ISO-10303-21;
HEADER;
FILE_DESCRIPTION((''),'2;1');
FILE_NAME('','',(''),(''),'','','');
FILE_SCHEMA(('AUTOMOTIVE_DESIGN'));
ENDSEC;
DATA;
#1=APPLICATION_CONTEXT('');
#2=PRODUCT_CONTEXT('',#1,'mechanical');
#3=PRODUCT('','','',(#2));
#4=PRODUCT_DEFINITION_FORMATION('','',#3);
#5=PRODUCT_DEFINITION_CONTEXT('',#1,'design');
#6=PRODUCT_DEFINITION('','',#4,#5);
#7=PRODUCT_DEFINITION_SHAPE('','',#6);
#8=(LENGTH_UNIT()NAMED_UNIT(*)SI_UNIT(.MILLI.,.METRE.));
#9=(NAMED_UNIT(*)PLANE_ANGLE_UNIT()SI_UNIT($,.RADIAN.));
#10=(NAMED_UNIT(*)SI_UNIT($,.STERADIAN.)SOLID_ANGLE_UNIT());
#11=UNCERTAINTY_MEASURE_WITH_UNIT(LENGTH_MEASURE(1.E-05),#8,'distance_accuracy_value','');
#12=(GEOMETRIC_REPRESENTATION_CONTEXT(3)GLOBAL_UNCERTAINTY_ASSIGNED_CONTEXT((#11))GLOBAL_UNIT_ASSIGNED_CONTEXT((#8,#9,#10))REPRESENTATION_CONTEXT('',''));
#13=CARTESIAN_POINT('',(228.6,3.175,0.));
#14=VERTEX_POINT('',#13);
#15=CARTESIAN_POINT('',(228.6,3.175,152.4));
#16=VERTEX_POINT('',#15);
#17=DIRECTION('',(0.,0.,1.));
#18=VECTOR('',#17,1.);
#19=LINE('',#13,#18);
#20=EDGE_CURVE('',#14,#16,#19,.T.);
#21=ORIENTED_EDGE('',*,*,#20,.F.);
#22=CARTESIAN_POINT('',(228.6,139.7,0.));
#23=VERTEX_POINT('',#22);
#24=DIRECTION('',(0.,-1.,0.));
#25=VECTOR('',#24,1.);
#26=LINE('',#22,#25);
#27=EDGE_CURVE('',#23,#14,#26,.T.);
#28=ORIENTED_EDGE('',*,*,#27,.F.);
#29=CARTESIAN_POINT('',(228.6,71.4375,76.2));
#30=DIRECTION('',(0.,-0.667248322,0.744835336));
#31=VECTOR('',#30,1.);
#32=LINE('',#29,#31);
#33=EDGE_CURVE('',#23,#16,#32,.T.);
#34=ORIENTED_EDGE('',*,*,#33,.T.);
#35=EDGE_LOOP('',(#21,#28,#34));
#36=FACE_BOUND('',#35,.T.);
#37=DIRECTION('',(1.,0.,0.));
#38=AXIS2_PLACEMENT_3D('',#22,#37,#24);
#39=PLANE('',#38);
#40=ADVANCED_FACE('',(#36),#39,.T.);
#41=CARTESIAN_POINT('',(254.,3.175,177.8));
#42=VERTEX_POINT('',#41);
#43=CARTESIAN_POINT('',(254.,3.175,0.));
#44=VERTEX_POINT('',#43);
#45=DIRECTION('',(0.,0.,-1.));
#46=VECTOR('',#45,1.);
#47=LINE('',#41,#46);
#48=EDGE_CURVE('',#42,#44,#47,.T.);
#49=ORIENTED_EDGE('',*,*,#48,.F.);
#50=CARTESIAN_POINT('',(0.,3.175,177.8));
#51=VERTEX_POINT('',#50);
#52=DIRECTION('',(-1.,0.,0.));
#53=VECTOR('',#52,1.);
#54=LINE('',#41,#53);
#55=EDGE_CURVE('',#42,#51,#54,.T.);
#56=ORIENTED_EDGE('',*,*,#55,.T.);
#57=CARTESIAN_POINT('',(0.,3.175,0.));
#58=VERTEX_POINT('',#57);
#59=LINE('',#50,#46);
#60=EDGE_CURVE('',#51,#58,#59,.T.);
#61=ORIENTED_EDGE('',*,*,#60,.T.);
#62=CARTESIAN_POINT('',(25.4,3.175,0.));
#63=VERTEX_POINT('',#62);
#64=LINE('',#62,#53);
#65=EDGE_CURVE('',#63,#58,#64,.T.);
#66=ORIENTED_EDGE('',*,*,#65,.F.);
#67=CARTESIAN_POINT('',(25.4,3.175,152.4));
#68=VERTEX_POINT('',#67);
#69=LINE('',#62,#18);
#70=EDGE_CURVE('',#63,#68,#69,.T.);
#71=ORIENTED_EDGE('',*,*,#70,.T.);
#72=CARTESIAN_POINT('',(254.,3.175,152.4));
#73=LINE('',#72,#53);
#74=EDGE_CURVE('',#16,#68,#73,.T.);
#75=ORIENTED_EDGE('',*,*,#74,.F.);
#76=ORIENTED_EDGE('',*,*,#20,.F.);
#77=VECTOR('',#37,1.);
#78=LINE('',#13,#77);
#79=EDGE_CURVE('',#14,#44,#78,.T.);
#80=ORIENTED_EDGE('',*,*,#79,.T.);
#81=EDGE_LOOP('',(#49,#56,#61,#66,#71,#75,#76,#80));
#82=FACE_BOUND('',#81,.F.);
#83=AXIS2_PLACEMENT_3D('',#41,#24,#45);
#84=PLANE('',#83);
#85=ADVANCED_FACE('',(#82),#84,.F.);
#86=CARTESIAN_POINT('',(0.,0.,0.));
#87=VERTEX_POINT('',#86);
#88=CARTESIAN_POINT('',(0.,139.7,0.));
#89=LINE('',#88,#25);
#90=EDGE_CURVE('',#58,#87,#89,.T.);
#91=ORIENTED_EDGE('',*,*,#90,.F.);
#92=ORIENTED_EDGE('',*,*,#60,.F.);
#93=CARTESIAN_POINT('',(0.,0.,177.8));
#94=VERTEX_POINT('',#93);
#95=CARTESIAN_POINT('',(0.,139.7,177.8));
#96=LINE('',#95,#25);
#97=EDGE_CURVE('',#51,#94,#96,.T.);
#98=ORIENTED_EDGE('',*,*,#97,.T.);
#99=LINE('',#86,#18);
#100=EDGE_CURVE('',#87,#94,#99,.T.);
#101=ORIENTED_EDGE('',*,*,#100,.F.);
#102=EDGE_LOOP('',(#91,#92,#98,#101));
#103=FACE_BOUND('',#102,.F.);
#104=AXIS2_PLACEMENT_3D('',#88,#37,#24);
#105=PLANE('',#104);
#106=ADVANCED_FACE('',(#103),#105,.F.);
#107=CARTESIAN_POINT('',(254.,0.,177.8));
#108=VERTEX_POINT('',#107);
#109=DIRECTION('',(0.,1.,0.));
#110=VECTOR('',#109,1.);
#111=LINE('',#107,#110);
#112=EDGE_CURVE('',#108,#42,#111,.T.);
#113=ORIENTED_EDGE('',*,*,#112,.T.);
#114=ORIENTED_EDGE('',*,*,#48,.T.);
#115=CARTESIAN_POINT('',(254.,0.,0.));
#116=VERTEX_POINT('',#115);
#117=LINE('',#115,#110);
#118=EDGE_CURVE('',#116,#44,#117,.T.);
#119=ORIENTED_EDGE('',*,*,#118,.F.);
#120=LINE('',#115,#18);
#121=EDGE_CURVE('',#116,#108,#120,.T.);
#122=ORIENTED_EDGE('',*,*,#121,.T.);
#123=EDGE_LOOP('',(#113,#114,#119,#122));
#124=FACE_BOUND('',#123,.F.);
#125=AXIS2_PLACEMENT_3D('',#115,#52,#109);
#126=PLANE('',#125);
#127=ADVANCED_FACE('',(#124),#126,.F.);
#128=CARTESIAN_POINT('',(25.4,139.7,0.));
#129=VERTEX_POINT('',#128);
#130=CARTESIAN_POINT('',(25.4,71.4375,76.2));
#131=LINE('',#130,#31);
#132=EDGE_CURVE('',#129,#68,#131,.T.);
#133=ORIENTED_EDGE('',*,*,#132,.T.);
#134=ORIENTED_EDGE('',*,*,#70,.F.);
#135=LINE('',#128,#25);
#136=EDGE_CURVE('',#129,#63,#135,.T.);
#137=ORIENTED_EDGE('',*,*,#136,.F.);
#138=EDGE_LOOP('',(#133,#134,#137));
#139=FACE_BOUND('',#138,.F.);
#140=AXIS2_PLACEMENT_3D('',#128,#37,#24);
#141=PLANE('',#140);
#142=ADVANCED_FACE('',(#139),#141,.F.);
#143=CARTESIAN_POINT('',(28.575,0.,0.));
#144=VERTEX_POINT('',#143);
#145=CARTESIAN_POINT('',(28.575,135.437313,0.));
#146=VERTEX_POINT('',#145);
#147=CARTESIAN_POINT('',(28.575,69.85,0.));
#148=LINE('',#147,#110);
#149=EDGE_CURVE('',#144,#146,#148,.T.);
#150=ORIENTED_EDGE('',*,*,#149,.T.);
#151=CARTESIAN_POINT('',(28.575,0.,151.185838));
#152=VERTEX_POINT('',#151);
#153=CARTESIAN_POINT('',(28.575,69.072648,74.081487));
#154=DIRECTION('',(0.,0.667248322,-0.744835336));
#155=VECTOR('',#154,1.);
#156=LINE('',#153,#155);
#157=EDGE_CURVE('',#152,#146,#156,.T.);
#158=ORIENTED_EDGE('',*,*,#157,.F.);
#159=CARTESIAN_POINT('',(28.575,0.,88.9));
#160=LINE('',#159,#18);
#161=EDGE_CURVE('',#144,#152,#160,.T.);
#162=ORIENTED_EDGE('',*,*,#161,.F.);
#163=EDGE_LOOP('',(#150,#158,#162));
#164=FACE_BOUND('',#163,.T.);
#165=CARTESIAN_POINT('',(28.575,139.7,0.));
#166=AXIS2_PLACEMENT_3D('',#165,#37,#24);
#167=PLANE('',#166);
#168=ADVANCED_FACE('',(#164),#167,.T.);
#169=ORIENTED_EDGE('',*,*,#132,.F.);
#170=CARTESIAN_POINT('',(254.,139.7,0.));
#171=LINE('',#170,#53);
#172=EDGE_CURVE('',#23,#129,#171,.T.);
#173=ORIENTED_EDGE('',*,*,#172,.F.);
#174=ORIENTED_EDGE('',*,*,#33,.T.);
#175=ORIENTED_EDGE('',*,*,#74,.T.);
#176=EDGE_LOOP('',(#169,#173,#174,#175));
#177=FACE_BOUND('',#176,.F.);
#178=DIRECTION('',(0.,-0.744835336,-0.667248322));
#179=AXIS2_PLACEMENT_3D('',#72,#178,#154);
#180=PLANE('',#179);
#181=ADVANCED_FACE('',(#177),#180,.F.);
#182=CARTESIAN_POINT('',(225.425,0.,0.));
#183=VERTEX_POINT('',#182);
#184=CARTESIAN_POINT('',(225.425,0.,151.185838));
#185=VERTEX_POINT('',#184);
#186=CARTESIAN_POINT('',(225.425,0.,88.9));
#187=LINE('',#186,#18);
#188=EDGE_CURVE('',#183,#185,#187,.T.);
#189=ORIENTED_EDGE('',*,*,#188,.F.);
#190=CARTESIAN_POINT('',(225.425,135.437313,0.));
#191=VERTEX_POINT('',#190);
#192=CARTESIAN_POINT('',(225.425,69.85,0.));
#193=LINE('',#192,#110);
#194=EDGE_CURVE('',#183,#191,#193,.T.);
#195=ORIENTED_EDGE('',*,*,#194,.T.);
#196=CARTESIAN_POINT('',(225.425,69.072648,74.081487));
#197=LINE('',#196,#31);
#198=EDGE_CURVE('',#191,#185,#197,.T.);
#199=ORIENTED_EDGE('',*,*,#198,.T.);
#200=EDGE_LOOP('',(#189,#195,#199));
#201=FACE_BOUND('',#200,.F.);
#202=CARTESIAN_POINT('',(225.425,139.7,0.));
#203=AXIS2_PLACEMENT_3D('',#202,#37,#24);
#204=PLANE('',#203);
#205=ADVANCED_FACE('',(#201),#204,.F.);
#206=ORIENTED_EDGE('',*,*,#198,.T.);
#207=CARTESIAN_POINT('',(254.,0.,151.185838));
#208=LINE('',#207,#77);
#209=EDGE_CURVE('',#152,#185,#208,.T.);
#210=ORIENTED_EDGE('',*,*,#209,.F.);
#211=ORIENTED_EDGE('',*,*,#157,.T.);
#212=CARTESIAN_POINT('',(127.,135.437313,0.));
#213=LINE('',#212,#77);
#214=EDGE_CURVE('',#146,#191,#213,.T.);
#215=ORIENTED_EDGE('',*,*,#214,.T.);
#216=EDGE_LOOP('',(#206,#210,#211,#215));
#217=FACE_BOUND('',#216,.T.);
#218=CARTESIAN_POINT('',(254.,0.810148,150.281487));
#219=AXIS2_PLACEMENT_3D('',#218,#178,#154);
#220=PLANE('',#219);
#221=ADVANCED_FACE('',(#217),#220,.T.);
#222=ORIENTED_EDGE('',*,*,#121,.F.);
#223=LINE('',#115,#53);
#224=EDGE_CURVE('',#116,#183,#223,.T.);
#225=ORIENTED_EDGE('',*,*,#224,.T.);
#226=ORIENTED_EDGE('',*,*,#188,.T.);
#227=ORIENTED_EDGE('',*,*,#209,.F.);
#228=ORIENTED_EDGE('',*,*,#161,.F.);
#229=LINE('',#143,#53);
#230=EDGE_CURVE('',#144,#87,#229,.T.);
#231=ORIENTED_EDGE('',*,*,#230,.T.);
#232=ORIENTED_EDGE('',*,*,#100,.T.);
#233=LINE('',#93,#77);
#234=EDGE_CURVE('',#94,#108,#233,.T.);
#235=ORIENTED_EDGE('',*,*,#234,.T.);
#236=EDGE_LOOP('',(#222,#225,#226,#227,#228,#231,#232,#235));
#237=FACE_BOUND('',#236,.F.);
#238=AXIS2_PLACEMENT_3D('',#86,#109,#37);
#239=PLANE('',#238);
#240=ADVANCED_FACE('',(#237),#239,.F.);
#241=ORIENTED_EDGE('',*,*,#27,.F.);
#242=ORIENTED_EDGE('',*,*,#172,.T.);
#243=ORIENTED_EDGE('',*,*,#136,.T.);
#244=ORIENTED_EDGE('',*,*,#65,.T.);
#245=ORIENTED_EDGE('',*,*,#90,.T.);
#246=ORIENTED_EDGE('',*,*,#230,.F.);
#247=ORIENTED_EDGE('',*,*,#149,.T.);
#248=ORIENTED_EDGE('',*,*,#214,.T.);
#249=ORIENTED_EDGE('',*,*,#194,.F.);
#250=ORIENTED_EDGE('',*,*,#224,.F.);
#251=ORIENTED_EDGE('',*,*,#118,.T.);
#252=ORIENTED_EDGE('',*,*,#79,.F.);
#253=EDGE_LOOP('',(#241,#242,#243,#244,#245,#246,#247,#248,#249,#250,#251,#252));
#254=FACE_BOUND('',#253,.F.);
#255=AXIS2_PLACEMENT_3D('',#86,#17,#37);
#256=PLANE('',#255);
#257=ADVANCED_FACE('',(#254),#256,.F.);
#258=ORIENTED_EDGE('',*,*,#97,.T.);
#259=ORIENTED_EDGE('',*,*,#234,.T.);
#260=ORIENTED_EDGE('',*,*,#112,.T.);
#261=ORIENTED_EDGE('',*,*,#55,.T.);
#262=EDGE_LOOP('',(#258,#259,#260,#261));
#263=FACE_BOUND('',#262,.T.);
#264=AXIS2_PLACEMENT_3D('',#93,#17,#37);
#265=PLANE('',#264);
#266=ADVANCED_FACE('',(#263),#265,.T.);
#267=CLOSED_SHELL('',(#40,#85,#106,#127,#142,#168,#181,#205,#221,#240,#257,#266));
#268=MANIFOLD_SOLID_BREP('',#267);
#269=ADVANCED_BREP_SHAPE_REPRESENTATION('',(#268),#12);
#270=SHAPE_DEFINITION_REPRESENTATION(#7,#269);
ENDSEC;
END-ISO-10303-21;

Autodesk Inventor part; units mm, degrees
ref_plane "YZ Plane" through (0, 0, 0) normal (1, 0, 0) x (0, 1, 0)
ref_plane "XZ Plane" through (0, 0, 0) normal (0, 1, 0) x (-1, 0, 0)
ref_plane "XY Plane" through (0, 0, 0) normal (0, 0, 1) x (1, 0, 0)
sketch "Sketch1" plane through (0, 0, 0) normal (0, 0, 1) x (1, 0, 0)
  line L0 (0, 0) -> (254, 0)
  line L1 (254, 0) -> (254, 139.7)
  line L2 (254, 139.7) -> (0, 139.7)
  line L3 (0, 139.7) -> (0, 0)
  dimension "d0" = 254
  dimension "d1" = 139.7
extrude "Extrusion1" add sketch "Sketch1" along normal blind 177.8
sketch "Sketch4" plane through (254, 0, 0) normal (1, 0, 0) x (0, 0, -1)
  line L0 (-177.8, 139.7) -> (-177.8, 0) projected
  line L1 (0, 0) -> (-177.8, 0) projected
  line L2 (0, 139.7) -> (-177.8, 139.7)
  line L3 (-177.8, 139.7) -> (-177.8, 3.175)
  line L4 (-177.8, 3.175) -> (-152.4, 3.175)
  line L5 (-152.4, 3.175) -> (0, 139.7)
  dimension "d10" = 3.175
  dimension "d11" = 25.4
extrude "Extrusion3" cut sketch "Sketch4" against normal through all
sketch "Sketch5" plane through (0, 0, 0) normal (0, 0, -1) x (-1, 0, 0)
  line L0 (0, 0) -> (-254, 0) projected
  line L1 (0, 139.7) -> (0, 0) projected
  line L2 (-254, 139.7) -> (-228.6, 139.7)
  line L3 (-228.6, 139.7) -> (-228.6, 3.175)
  line L4 (-228.6, 3.175) -> (-254, 3.175)
  line L5 (-254, 3.175) -> (-254, 139.7)
  line L6 (0, 139.7) -> (-25.4, 139.7)
  line L7 (-25.4, 139.7) -> (-25.4, 3.175)
  line L8 (-25.4, 3.175) -> (0, 3.175)
  line L9 (0, 3.175) -> (0, 139.7)
  dimension "d15" = 3.175
  dimension "d16" = 25.4
extrude "Extrusion4" cut sketch "Sketch5" against normal through all
shell "Shell1" thickness 3.175 removed faces 2 at (160.8667, 48.6833, 0) at (84.6667, 0, 59.2667)
properties part number "Panel_ShooterShroud" material "Polycarbonate, Smoke"
